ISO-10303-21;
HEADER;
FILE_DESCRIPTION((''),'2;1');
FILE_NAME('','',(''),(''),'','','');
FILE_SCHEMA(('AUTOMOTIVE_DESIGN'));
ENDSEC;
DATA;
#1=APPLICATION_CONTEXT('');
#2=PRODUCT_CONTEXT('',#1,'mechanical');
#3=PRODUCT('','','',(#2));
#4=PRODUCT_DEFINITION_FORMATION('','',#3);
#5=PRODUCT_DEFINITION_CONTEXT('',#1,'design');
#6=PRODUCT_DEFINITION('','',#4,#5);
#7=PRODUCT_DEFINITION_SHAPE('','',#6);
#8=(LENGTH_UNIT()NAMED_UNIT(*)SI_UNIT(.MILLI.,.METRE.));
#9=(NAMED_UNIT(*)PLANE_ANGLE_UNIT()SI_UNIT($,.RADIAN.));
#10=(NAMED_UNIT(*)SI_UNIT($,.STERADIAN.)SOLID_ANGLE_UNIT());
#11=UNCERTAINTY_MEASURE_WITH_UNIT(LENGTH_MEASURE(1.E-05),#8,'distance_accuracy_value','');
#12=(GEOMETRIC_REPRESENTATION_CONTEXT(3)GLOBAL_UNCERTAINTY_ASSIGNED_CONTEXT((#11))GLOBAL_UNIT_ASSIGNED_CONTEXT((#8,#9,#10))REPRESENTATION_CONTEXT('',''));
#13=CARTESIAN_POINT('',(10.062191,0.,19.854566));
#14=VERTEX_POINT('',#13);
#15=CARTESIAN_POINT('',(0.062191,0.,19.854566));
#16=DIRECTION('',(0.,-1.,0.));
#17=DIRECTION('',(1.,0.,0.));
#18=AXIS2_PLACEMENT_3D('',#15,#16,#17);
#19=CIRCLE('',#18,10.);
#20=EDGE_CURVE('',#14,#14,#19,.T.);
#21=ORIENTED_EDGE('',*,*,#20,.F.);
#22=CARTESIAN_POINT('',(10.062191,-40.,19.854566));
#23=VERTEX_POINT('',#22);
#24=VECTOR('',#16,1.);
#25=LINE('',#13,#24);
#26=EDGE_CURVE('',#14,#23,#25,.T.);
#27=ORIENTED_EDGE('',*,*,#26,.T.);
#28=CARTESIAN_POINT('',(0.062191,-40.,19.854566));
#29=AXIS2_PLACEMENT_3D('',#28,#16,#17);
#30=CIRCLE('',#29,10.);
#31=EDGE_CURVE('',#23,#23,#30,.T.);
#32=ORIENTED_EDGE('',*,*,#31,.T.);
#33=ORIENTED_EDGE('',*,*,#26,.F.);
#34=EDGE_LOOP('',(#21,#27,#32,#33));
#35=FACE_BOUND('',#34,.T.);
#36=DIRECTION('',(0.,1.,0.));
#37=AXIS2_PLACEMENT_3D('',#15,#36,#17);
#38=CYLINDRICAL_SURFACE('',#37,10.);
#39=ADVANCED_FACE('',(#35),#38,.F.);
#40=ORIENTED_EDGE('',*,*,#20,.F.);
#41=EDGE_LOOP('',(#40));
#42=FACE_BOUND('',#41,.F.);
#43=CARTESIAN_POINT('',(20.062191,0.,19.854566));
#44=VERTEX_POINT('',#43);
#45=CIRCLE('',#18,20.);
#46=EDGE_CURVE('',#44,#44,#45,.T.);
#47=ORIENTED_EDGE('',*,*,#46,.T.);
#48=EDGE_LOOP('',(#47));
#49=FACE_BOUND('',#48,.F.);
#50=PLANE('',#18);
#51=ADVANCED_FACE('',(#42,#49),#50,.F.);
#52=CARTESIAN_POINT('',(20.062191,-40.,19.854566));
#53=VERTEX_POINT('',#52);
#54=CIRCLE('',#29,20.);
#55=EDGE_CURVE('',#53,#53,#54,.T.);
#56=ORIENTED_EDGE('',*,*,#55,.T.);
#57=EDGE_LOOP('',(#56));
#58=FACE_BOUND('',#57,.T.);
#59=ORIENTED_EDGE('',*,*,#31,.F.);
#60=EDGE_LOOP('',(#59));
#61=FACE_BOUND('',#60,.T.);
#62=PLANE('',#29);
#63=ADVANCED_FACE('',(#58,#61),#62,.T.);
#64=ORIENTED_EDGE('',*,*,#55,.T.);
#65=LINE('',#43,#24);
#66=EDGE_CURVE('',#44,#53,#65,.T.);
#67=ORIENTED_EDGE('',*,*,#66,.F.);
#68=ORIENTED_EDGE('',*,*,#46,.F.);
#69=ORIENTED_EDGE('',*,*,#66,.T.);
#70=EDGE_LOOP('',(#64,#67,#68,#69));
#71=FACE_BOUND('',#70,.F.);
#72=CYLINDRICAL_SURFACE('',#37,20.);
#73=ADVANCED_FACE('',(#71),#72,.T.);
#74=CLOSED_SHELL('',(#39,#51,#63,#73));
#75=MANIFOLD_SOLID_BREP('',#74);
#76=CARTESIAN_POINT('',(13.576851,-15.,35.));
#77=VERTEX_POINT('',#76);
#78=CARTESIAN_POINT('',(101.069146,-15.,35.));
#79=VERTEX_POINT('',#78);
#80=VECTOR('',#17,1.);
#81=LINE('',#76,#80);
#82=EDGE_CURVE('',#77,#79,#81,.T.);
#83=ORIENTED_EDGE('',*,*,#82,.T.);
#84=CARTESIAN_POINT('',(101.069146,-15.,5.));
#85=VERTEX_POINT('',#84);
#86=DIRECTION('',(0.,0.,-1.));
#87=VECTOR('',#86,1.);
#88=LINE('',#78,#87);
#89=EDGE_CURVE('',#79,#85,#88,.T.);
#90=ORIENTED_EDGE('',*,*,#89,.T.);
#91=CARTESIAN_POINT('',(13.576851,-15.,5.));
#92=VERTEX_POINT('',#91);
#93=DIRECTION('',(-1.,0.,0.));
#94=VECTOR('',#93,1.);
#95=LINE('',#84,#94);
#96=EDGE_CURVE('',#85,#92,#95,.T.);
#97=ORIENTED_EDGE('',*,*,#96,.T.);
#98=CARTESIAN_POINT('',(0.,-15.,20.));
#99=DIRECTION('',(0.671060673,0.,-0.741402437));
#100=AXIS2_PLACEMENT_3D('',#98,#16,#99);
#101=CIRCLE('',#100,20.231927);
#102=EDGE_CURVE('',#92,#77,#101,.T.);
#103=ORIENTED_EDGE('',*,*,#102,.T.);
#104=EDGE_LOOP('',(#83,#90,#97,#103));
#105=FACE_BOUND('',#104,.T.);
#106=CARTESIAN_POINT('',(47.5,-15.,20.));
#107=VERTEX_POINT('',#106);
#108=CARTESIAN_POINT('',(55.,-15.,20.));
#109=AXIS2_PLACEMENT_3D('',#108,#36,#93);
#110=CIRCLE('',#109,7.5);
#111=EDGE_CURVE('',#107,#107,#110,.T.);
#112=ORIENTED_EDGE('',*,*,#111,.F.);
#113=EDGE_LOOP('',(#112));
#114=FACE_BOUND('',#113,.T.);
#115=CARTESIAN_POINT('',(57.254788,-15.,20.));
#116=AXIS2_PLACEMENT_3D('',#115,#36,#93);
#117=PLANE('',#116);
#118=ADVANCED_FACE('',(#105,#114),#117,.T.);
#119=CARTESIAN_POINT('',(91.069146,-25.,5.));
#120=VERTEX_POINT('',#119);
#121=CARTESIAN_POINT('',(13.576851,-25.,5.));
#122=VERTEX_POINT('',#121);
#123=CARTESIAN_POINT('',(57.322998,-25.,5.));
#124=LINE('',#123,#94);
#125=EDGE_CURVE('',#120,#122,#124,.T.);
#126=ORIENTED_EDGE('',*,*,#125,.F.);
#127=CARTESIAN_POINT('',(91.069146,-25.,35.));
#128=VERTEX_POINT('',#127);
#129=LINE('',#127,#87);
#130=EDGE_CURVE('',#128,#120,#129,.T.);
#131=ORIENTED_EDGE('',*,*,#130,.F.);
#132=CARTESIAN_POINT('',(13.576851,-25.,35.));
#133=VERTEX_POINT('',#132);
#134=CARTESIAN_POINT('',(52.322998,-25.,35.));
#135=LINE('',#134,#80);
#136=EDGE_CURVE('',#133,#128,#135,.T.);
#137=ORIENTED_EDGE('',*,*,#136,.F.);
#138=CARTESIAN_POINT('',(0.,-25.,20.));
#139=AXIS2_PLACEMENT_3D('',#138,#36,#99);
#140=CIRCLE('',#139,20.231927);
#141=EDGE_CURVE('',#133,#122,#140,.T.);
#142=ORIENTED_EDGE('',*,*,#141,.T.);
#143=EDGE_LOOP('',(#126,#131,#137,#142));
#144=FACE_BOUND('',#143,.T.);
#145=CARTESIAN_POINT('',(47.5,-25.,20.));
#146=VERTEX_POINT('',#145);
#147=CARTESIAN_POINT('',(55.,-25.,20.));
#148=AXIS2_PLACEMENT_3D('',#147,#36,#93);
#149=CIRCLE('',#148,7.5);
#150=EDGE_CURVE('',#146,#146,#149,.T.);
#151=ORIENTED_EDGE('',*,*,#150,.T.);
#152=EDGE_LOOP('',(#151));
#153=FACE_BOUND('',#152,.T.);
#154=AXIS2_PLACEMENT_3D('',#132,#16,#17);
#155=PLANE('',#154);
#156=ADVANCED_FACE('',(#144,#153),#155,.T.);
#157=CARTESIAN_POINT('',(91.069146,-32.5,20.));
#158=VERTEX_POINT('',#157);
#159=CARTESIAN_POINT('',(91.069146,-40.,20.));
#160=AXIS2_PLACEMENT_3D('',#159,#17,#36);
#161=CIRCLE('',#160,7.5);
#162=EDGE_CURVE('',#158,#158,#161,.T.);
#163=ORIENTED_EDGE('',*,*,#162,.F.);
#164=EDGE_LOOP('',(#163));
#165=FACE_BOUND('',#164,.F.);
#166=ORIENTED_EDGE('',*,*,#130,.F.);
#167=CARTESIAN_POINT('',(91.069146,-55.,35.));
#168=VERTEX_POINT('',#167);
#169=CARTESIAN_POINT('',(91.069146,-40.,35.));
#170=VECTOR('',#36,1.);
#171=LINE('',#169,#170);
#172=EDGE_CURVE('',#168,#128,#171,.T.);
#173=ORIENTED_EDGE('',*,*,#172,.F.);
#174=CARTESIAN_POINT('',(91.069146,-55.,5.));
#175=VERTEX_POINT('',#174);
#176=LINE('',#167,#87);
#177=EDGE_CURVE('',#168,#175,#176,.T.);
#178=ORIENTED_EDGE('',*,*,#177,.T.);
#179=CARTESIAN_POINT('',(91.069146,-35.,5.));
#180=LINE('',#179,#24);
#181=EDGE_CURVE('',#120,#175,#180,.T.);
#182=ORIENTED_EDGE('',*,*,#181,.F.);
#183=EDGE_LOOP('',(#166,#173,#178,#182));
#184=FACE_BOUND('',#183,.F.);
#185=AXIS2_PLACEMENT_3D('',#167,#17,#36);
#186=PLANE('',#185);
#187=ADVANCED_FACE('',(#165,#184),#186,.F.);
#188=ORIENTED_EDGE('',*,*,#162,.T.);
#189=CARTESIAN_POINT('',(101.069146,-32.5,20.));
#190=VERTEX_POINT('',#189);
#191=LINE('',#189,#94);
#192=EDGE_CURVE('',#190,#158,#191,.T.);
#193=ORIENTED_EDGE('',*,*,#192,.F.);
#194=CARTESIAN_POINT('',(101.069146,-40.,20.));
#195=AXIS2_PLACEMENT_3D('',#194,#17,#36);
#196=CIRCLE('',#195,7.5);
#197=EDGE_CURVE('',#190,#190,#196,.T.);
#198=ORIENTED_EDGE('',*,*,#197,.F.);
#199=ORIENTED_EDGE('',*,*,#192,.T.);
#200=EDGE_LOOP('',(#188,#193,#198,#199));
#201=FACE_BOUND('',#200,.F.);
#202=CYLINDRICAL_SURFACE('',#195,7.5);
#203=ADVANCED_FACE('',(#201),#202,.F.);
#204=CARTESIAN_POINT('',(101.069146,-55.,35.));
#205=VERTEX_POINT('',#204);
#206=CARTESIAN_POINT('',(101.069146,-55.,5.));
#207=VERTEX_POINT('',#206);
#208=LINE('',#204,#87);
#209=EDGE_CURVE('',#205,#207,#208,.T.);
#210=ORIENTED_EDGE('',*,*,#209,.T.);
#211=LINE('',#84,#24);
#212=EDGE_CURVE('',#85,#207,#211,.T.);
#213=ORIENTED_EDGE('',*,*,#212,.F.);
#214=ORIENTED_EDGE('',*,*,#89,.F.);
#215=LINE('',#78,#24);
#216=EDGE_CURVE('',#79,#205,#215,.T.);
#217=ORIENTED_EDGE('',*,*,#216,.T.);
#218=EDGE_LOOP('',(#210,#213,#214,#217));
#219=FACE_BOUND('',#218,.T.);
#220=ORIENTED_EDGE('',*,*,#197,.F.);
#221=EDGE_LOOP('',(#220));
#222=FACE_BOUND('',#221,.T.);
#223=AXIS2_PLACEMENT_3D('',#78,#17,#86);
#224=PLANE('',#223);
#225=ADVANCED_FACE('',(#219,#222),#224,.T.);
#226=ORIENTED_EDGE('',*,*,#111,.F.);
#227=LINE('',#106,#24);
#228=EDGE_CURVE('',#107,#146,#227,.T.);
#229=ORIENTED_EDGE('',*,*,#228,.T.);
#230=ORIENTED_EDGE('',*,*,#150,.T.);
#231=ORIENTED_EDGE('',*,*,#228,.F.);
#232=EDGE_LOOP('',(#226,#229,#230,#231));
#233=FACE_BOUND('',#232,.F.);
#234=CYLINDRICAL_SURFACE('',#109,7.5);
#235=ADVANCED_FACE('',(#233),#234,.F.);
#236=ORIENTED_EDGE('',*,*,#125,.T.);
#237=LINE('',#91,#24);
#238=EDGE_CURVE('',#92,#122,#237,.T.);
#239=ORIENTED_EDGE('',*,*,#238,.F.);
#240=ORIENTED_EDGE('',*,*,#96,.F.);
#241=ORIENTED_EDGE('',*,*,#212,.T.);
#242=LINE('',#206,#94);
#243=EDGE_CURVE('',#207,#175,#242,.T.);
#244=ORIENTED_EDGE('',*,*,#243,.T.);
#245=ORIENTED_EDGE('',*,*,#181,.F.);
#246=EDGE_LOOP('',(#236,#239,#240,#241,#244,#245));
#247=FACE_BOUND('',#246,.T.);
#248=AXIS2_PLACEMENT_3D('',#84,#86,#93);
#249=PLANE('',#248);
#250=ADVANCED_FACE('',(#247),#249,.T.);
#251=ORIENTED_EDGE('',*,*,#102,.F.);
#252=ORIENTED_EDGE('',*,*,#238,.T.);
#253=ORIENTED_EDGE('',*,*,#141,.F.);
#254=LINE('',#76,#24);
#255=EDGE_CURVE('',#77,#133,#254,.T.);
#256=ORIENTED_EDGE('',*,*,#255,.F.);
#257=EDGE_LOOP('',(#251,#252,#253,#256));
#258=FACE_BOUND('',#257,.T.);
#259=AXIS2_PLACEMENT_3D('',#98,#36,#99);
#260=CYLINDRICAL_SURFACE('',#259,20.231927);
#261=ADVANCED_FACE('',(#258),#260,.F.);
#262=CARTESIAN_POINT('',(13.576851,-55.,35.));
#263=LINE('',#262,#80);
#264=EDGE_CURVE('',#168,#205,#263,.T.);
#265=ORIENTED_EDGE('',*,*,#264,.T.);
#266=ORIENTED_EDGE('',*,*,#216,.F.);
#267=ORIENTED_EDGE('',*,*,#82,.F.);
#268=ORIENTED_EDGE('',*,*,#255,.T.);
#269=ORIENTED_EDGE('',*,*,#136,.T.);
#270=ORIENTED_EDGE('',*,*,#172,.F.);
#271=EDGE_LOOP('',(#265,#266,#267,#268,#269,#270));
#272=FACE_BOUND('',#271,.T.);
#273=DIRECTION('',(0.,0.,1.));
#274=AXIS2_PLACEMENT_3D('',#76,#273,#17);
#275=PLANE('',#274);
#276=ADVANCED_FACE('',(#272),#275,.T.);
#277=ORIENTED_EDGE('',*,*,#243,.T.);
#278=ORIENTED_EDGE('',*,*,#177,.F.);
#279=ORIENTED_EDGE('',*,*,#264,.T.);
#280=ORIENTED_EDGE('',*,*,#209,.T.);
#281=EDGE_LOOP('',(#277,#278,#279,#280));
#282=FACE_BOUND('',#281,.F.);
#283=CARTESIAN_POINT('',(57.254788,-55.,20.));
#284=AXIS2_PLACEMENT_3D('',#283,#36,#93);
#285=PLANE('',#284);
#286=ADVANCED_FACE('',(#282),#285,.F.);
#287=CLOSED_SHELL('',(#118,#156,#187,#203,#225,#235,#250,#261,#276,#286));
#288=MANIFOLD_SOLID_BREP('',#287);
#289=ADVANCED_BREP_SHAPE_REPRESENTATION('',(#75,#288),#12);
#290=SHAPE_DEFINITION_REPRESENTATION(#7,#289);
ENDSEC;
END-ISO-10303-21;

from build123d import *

# Parameters (mm, degrees)
F0_R      = 20
F0_R_2    = 10
F1_DEPTH  = 40
F4_DEPTH  = 40
F5_W      = 77.4922952824
F5_H      = 30
F6_DEPTH  = 35.1464343736
F7_R      = 7.5
F8_DEPTH  = 40.001
F9_R      = 7.5
F10_DEPTH = 121.0079549157


with BuildPart() as f1:
    # F0 (on Front) → F1 (new body)
    with BuildSketch(Plane.XZ):
        with Locations((0.0621909407, 19.8545656264)):
            Circle(F0_R)
        with Locations((0.0621909407, 19.8545656264)):
            Circle(F0_R_2, mode=Mode.SUBTRACT)
    extrude(amount=F1_DEPTH)


with BuildPart() as f4:
    # F3 (on offset) → F4 (new body)
    with BuildSketch(Plane(origin=(0, -15, 0), x_dir=(-1, 0, 0), z_dir=(0, 1, 0))):
        with BuildLine():
            Line((-101.0691458563, 35), (-101.0691458563, 20))
            Line((-101.0691458563, 20), (-101.0691458563, 5))
            Line((-101.0691458563, 5), (-13.576850574, 5))
            ThreePointArc((-13.576850574, 5), (-20.231927034, 20), (-13.576850574, 35))
            Line((-13.576850574, 35), (-101.0691458563, 35))
        make_face()
    extrude(amount=-F4_DEPTH)

    # F5 (on face) → F6 (cut, through all)
    with BuildSketch(Plane.XY.offset(35)):
        with Locations((52.3229982152, -40)):
            Rectangle(F5_W, F5_H)
    extrude(amount=-F6_DEPTH, mode=Mode.SUBTRACT)

    # F7 (on face) → F8 (cut, through all)
    with BuildSketch(Plane(origin=(0, -15, 0), x_dir=(-1, 0, 0), z_dir=(0, 1, 0))):
        with Locations((-55, 20)):
            Circle(F7_R)
    extrude(amount=-F8_DEPTH, mode=Mode.SUBTRACT)

    # F9 (on face) → F10 (cut, through all)
    with BuildSketch(Plane.YZ.offset(101.0691458563)):
        with Locations((-40, 20)):
            Circle(F9_R)
    extrude(amount=-F10_DEPTH, mode=Mode.SUBTRACT)


solid = Compound([f1.part, f4.part])
